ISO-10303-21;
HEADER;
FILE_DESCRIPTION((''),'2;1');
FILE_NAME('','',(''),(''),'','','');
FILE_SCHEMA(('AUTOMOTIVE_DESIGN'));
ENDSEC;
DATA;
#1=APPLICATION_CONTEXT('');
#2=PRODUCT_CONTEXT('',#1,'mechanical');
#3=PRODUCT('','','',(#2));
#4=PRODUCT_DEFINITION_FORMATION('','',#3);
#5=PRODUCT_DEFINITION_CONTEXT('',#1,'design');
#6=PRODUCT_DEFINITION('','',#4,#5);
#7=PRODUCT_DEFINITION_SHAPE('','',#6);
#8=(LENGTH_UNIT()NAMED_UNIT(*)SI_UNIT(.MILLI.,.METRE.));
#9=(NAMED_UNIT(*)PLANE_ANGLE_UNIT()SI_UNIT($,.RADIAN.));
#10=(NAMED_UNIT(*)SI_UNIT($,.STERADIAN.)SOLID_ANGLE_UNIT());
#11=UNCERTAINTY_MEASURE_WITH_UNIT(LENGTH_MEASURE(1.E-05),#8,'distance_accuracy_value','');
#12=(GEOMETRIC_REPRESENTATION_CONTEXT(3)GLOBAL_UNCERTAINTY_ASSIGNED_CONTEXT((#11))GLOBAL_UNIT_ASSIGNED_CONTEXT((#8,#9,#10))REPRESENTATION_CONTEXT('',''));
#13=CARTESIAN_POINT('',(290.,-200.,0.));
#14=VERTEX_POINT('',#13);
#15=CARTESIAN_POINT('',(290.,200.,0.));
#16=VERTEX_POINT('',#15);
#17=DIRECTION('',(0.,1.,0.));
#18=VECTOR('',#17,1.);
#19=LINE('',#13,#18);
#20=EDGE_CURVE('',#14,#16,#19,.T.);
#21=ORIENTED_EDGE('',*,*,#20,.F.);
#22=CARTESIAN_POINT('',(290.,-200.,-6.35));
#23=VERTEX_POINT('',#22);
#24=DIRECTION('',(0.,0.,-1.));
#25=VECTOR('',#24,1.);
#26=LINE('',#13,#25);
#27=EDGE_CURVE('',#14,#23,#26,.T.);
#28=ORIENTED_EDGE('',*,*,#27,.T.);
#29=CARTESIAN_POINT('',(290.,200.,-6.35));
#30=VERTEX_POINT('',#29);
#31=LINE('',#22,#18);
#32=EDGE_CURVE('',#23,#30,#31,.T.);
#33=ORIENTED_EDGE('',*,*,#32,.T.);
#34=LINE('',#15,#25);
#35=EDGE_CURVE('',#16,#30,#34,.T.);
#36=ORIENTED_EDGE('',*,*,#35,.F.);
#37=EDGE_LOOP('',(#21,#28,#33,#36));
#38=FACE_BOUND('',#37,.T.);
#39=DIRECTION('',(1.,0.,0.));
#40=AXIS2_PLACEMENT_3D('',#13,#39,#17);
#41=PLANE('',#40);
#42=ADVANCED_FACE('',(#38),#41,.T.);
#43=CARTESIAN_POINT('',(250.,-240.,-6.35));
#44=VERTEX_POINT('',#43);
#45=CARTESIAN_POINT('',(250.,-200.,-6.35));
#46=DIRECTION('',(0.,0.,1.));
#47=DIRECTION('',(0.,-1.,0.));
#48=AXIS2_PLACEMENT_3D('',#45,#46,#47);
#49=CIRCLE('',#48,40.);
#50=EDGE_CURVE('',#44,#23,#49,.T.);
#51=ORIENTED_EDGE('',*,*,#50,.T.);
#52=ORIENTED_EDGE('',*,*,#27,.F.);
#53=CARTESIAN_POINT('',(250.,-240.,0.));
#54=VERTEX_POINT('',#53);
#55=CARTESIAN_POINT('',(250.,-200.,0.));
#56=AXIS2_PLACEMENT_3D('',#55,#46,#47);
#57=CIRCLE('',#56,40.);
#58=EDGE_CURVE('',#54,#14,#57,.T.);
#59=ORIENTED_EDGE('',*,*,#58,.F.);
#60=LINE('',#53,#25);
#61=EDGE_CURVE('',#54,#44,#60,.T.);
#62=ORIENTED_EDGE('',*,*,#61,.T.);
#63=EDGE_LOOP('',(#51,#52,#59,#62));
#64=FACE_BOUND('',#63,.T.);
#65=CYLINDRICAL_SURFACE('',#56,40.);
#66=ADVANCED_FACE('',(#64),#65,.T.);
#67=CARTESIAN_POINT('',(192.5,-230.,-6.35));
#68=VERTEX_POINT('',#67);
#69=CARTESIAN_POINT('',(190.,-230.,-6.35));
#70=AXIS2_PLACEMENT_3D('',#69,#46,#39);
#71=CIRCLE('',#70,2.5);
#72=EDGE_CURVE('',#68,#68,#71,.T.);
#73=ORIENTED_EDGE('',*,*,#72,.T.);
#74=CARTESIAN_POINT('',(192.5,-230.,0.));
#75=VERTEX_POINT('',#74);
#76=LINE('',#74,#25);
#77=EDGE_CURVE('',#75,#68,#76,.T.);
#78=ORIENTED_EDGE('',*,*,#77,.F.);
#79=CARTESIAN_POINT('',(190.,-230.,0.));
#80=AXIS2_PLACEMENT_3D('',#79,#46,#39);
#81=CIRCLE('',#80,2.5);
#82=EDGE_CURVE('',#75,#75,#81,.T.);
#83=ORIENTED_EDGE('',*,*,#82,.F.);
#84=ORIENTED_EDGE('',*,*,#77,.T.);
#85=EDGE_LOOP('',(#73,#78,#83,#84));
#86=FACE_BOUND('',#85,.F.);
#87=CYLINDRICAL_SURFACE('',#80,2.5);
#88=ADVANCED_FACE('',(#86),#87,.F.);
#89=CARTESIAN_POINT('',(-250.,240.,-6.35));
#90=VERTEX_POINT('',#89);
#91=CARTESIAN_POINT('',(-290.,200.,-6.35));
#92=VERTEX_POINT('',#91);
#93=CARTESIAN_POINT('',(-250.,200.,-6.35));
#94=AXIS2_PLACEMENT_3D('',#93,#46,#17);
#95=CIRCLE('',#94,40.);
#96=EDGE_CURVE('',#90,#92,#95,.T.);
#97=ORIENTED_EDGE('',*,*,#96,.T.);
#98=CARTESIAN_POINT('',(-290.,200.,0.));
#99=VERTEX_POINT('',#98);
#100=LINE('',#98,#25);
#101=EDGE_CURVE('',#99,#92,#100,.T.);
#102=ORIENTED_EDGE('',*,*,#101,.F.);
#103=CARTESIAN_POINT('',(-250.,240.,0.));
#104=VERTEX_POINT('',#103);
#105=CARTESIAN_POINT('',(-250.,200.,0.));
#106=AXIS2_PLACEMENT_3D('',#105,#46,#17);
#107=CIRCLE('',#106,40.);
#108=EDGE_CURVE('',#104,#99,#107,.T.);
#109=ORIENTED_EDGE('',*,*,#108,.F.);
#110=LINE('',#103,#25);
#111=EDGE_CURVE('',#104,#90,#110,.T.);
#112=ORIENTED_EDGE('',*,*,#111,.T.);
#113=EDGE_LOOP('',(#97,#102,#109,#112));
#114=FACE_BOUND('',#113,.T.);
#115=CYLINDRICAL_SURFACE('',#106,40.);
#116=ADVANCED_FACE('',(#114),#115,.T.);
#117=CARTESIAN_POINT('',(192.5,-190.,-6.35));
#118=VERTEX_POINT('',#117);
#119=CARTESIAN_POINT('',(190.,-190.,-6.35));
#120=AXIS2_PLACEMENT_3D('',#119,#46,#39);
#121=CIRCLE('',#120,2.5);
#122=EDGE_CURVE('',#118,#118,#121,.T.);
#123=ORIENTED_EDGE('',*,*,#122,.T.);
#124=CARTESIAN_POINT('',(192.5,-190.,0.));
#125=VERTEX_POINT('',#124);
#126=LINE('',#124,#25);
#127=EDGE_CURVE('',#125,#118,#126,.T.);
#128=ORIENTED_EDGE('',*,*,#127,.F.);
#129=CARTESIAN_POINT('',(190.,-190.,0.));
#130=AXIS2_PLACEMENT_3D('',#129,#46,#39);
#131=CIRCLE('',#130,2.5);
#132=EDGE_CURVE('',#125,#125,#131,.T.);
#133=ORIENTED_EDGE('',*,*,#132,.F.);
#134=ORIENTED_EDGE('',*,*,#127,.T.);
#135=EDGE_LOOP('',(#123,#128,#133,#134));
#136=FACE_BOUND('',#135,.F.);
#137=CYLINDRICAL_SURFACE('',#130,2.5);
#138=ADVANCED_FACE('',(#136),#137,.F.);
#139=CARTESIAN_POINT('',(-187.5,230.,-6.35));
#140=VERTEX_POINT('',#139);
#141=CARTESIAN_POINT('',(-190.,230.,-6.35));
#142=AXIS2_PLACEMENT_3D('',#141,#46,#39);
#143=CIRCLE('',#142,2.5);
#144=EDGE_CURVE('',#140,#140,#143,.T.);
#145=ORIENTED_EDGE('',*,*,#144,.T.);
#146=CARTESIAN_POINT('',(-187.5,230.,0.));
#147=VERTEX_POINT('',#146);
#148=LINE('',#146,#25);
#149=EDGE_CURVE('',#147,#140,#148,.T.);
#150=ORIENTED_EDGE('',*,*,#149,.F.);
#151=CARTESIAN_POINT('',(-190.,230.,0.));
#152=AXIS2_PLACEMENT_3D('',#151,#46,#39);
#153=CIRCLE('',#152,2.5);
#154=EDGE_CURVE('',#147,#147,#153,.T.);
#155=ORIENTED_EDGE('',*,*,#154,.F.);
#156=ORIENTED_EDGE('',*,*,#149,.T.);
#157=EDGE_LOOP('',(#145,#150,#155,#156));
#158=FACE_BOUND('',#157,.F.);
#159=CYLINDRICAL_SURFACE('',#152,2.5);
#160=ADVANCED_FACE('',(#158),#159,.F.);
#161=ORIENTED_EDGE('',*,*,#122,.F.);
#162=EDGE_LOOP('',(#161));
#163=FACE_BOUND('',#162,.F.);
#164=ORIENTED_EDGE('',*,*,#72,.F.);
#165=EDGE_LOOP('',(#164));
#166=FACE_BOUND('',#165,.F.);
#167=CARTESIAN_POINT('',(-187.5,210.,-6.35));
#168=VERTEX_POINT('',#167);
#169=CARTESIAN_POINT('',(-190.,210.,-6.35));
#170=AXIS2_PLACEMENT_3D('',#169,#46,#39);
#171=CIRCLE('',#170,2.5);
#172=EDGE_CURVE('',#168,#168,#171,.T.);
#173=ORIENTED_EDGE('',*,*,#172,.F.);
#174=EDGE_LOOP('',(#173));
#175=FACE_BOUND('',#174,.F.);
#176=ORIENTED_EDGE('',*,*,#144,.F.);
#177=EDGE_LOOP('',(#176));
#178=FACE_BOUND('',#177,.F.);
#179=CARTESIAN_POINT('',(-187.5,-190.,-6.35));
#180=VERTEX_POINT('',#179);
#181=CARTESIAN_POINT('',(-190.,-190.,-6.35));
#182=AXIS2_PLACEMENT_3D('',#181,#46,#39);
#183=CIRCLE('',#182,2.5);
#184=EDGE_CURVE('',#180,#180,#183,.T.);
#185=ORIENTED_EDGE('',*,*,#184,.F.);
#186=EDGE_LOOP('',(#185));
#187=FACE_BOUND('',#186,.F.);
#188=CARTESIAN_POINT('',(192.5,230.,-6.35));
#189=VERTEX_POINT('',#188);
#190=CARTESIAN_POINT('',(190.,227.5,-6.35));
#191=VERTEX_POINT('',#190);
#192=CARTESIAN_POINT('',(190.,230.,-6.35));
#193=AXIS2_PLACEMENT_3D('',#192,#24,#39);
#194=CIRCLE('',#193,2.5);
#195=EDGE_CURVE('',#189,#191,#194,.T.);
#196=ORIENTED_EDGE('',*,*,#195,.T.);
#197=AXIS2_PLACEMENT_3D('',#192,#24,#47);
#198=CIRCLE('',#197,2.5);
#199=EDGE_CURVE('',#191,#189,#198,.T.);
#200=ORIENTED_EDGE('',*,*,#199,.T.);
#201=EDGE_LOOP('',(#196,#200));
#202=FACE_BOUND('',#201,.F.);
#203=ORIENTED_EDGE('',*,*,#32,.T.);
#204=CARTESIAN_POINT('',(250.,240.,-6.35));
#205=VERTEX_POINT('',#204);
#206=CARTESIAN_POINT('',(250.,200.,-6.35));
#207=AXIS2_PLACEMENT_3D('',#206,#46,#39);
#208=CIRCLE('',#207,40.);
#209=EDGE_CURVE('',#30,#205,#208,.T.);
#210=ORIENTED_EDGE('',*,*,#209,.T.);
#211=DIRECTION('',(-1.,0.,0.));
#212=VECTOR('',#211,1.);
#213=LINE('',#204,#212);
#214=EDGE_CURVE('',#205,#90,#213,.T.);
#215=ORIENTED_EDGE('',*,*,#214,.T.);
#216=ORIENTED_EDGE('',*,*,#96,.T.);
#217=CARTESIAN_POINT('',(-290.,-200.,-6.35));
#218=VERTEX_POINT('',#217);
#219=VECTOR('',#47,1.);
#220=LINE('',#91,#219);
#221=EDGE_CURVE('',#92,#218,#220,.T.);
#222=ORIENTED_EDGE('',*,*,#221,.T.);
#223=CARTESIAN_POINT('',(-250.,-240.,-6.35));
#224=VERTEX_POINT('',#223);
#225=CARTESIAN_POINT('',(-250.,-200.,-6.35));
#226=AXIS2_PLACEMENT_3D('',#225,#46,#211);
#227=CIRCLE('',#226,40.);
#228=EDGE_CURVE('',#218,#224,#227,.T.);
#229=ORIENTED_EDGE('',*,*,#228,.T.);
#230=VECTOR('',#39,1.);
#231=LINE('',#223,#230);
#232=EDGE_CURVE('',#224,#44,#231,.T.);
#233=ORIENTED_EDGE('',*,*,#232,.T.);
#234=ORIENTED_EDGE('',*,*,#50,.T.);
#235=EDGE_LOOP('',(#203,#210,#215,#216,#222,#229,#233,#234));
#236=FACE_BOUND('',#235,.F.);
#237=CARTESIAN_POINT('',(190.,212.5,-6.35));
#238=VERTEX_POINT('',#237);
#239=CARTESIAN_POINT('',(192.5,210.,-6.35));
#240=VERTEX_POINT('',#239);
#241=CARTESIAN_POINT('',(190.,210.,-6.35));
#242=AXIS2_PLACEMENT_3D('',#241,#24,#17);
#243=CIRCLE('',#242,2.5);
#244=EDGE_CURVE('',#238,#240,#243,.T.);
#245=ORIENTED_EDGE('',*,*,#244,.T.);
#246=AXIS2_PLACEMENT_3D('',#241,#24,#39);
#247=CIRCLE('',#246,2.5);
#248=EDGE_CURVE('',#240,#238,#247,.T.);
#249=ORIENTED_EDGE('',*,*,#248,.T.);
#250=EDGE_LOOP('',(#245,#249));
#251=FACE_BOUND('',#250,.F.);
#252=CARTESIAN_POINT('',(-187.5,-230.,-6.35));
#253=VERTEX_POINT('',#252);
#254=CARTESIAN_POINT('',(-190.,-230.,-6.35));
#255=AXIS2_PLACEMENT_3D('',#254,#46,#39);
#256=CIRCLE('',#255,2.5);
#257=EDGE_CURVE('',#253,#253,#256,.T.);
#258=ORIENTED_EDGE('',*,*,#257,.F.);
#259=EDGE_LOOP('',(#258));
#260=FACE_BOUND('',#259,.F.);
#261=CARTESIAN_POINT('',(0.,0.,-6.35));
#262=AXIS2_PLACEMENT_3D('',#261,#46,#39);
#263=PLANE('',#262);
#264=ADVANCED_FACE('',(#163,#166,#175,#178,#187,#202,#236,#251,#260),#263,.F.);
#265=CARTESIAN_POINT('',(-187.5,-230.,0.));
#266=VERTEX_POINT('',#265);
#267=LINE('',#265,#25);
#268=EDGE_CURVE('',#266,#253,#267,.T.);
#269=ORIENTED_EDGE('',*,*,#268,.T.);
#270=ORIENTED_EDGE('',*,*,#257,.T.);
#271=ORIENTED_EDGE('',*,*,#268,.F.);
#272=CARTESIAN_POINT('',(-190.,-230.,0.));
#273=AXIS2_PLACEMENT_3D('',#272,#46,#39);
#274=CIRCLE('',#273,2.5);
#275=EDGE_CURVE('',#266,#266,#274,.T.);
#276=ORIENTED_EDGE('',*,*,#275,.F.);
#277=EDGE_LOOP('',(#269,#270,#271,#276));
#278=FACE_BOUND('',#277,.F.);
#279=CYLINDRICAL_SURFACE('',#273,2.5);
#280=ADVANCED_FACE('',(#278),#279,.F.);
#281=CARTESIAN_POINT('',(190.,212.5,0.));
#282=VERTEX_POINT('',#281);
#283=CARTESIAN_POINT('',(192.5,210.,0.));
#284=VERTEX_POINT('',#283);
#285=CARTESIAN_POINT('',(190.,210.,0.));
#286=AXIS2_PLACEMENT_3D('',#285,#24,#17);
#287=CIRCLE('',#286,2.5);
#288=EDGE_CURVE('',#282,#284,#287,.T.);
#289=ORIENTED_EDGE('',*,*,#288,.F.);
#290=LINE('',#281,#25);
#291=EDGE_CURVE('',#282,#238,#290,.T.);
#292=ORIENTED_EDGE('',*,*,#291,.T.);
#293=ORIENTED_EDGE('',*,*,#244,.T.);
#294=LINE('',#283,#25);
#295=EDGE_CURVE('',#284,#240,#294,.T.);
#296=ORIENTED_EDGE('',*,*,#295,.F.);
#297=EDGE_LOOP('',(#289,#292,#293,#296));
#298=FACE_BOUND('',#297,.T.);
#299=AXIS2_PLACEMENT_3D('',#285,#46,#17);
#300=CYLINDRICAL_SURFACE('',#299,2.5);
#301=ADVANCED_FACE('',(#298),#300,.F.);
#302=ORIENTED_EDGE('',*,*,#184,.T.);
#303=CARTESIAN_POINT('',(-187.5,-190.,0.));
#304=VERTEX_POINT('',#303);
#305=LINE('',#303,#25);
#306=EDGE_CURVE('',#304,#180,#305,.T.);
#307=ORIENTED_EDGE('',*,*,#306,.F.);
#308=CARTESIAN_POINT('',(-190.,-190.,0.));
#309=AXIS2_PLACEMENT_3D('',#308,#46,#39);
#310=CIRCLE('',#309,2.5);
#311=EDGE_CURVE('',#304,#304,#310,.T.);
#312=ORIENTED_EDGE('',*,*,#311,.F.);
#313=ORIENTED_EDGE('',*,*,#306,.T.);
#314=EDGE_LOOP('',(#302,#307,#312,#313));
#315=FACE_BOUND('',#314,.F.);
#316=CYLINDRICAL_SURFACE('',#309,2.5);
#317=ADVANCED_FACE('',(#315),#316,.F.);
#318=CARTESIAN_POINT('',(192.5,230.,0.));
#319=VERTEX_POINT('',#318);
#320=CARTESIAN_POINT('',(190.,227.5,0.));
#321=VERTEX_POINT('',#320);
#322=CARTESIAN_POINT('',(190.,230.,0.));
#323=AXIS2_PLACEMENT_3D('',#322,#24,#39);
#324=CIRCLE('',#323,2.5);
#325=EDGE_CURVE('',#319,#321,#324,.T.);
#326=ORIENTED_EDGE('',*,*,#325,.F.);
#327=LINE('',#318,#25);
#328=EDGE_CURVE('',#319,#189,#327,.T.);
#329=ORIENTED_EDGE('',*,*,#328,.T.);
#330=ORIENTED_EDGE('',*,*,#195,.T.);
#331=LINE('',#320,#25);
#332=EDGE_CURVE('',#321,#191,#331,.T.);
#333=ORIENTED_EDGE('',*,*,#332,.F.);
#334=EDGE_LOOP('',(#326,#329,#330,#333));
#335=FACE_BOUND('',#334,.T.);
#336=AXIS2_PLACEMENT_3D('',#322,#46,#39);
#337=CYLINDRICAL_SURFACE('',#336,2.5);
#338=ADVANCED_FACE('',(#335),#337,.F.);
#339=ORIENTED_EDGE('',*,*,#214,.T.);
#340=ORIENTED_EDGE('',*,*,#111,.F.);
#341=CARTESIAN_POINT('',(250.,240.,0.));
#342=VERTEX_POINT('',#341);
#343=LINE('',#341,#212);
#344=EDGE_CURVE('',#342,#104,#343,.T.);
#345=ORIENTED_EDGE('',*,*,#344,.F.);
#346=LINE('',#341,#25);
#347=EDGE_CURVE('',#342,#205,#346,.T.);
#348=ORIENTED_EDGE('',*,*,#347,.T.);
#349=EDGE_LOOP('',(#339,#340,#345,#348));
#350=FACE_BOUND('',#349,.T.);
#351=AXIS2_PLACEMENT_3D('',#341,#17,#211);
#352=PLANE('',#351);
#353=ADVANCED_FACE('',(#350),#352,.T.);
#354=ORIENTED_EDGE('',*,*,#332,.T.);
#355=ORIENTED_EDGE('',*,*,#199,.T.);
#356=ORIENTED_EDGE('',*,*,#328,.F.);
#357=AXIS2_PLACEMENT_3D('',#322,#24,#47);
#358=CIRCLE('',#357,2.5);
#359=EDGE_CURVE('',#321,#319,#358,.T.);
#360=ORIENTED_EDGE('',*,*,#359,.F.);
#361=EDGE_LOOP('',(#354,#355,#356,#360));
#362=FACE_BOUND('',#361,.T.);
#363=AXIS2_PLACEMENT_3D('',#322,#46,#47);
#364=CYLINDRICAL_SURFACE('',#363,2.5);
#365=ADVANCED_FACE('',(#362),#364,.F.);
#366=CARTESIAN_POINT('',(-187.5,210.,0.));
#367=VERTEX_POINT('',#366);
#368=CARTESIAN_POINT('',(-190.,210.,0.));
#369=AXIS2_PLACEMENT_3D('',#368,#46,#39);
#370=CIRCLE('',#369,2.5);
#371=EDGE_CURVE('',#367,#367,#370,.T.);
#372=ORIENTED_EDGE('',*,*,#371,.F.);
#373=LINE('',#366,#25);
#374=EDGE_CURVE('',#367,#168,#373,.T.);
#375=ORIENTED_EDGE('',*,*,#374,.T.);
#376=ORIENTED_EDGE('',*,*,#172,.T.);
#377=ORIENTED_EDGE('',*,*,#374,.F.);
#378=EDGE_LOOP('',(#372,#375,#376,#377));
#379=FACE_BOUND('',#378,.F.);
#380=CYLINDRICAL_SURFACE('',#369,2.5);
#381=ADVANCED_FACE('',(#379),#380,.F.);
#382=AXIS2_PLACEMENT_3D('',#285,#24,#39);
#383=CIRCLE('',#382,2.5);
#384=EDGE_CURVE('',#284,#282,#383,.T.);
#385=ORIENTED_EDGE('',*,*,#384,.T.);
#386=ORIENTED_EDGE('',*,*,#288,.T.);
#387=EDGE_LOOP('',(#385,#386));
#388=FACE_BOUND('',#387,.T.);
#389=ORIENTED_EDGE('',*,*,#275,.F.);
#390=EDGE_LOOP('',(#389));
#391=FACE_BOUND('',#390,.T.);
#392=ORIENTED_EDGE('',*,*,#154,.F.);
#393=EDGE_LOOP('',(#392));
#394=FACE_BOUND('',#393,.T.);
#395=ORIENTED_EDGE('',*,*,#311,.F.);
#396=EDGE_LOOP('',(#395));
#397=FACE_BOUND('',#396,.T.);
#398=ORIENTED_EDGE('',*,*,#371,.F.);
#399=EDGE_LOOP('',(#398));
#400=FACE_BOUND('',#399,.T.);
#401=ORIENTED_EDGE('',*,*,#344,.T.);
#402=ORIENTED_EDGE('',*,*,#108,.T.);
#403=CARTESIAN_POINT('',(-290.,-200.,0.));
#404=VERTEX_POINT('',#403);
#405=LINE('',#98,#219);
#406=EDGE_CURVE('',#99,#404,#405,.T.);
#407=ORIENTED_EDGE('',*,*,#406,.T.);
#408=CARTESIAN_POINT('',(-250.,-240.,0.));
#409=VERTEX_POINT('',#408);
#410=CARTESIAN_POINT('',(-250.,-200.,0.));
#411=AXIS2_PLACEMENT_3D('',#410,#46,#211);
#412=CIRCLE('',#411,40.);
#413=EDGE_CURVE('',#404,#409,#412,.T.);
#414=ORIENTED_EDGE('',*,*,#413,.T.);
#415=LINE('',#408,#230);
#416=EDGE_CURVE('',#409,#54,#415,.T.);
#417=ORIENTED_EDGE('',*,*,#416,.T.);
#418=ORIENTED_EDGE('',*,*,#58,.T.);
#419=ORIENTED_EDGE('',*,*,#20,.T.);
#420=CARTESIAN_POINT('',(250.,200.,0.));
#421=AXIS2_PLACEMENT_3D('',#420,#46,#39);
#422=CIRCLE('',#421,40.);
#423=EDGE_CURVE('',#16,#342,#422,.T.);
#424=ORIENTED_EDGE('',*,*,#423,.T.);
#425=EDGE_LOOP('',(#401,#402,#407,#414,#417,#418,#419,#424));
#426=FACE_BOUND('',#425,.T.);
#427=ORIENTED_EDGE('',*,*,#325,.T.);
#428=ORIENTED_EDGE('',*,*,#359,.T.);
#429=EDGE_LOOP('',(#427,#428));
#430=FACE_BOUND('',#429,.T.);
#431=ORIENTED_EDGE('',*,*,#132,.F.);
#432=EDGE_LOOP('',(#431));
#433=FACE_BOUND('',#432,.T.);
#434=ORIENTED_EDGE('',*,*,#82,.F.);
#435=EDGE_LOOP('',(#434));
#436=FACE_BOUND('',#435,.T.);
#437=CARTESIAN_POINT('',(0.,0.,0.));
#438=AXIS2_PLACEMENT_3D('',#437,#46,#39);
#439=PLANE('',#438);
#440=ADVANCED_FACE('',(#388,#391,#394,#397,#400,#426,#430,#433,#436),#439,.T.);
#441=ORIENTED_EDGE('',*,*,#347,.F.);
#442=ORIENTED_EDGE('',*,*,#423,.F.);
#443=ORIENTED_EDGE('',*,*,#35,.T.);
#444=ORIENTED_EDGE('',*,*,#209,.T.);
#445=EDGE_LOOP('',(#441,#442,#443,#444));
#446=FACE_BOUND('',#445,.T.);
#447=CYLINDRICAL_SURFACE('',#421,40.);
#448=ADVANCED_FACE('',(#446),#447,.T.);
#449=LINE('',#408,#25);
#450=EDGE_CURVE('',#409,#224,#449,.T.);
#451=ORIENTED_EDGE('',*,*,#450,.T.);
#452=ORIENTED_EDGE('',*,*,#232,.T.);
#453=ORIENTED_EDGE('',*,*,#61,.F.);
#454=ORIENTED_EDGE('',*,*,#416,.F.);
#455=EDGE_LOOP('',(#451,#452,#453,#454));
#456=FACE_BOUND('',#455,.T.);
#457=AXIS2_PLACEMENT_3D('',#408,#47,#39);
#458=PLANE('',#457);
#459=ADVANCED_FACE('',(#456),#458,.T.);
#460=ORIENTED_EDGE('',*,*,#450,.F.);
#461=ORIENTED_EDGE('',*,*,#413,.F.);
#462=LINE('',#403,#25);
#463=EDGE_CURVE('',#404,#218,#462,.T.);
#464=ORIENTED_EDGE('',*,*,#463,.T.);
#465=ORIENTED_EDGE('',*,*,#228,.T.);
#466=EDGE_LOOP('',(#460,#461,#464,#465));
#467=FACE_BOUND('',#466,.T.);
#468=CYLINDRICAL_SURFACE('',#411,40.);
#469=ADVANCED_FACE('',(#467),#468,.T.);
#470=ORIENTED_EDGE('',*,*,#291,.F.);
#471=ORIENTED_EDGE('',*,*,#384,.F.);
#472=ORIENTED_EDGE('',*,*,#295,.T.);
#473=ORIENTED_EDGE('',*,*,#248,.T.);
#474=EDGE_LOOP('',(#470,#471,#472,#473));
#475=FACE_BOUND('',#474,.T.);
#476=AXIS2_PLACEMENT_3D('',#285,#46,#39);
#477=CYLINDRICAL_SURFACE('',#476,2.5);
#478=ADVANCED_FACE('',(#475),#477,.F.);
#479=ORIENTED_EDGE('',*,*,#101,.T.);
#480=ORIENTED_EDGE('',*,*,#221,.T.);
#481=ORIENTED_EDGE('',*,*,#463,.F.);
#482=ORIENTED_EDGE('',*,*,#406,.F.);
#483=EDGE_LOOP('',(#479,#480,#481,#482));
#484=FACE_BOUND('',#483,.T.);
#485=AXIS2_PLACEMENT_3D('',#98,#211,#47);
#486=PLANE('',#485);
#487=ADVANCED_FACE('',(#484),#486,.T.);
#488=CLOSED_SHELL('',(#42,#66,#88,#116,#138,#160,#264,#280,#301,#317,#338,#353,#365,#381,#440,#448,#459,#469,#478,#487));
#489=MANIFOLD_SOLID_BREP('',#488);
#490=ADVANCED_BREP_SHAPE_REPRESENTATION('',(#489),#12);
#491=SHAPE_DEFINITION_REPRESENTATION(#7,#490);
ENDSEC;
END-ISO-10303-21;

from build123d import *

# Parameters (mm, degrees)
F0_R     = 2.5
F1_DEPTH = 6.35


# Not quite as in the source:
# - a length typed as a fraction of an inch, garbled in the dataset ("3 / 203.2 mm" for 3/8 in), is restored


with BuildPart() as f1:
    # F0 (on Top) → F1 (new body)
    with BuildSketch(Plane.XY):
        with BuildLine():
            Line((-250, -240), (250, -240))
            ThreePointArc((250, -240), (278.2842712475, -228.2842712475), (290, -200))
            Line((290, -200), (290, 200))
            ThreePointArc((290, 200), (278.2842712475, 228.2842712475), (250, 240))
            Line((250, 240), (-250, 240))
            ThreePointArc((-250, 240), (-278.2842712475, 228.2842712475), (-290, 200))
            Line((-290, 200), (-290, -200))
            ThreePointArc((-290, -200), (-278.2842712475, -228.2842712475), (-250, -240))
        make_face()
        with Locations((-190, -230)):
            Circle(F0_R, mode=Mode.SUBTRACT)
        with Locations((-190, -190)):
            Circle(F0_R, mode=Mode.SUBTRACT)
        with Locations((190, -230)):
            Circle(F0_R, mode=Mode.SUBTRACT)
        with Locations((190, -190)):
            Circle(F0_R, mode=Mode.SUBTRACT)
        with Locations((-190, 210)):
            Circle(F0_R, mode=Mode.SUBTRACT)
        with Locations((-190, 230)):
            Circle(F0_R, mode=Mode.SUBTRACT)
        with BuildLine():
            ThreePointArc((190, 212.5), (191.767766953, 211.767766953), (192.5, 210))
            ThreePointArc((192.5, 210), (188.232233047, 208.232233047), (190, 212.5))
        make_face(mode=Mode.SUBTRACT)
        with BuildLine():
            ThreePointArc((192.5, 230), (191.767766953, 228.232233047), (190, 227.5))
            ThreePointArc((190, 227.5), (188.232233047, 231.767766953), (192.5, 230))
        make_face(mode=Mode.SUBTRACT)
    extrude(amount=-F1_DEPTH)


solid = f1.part
